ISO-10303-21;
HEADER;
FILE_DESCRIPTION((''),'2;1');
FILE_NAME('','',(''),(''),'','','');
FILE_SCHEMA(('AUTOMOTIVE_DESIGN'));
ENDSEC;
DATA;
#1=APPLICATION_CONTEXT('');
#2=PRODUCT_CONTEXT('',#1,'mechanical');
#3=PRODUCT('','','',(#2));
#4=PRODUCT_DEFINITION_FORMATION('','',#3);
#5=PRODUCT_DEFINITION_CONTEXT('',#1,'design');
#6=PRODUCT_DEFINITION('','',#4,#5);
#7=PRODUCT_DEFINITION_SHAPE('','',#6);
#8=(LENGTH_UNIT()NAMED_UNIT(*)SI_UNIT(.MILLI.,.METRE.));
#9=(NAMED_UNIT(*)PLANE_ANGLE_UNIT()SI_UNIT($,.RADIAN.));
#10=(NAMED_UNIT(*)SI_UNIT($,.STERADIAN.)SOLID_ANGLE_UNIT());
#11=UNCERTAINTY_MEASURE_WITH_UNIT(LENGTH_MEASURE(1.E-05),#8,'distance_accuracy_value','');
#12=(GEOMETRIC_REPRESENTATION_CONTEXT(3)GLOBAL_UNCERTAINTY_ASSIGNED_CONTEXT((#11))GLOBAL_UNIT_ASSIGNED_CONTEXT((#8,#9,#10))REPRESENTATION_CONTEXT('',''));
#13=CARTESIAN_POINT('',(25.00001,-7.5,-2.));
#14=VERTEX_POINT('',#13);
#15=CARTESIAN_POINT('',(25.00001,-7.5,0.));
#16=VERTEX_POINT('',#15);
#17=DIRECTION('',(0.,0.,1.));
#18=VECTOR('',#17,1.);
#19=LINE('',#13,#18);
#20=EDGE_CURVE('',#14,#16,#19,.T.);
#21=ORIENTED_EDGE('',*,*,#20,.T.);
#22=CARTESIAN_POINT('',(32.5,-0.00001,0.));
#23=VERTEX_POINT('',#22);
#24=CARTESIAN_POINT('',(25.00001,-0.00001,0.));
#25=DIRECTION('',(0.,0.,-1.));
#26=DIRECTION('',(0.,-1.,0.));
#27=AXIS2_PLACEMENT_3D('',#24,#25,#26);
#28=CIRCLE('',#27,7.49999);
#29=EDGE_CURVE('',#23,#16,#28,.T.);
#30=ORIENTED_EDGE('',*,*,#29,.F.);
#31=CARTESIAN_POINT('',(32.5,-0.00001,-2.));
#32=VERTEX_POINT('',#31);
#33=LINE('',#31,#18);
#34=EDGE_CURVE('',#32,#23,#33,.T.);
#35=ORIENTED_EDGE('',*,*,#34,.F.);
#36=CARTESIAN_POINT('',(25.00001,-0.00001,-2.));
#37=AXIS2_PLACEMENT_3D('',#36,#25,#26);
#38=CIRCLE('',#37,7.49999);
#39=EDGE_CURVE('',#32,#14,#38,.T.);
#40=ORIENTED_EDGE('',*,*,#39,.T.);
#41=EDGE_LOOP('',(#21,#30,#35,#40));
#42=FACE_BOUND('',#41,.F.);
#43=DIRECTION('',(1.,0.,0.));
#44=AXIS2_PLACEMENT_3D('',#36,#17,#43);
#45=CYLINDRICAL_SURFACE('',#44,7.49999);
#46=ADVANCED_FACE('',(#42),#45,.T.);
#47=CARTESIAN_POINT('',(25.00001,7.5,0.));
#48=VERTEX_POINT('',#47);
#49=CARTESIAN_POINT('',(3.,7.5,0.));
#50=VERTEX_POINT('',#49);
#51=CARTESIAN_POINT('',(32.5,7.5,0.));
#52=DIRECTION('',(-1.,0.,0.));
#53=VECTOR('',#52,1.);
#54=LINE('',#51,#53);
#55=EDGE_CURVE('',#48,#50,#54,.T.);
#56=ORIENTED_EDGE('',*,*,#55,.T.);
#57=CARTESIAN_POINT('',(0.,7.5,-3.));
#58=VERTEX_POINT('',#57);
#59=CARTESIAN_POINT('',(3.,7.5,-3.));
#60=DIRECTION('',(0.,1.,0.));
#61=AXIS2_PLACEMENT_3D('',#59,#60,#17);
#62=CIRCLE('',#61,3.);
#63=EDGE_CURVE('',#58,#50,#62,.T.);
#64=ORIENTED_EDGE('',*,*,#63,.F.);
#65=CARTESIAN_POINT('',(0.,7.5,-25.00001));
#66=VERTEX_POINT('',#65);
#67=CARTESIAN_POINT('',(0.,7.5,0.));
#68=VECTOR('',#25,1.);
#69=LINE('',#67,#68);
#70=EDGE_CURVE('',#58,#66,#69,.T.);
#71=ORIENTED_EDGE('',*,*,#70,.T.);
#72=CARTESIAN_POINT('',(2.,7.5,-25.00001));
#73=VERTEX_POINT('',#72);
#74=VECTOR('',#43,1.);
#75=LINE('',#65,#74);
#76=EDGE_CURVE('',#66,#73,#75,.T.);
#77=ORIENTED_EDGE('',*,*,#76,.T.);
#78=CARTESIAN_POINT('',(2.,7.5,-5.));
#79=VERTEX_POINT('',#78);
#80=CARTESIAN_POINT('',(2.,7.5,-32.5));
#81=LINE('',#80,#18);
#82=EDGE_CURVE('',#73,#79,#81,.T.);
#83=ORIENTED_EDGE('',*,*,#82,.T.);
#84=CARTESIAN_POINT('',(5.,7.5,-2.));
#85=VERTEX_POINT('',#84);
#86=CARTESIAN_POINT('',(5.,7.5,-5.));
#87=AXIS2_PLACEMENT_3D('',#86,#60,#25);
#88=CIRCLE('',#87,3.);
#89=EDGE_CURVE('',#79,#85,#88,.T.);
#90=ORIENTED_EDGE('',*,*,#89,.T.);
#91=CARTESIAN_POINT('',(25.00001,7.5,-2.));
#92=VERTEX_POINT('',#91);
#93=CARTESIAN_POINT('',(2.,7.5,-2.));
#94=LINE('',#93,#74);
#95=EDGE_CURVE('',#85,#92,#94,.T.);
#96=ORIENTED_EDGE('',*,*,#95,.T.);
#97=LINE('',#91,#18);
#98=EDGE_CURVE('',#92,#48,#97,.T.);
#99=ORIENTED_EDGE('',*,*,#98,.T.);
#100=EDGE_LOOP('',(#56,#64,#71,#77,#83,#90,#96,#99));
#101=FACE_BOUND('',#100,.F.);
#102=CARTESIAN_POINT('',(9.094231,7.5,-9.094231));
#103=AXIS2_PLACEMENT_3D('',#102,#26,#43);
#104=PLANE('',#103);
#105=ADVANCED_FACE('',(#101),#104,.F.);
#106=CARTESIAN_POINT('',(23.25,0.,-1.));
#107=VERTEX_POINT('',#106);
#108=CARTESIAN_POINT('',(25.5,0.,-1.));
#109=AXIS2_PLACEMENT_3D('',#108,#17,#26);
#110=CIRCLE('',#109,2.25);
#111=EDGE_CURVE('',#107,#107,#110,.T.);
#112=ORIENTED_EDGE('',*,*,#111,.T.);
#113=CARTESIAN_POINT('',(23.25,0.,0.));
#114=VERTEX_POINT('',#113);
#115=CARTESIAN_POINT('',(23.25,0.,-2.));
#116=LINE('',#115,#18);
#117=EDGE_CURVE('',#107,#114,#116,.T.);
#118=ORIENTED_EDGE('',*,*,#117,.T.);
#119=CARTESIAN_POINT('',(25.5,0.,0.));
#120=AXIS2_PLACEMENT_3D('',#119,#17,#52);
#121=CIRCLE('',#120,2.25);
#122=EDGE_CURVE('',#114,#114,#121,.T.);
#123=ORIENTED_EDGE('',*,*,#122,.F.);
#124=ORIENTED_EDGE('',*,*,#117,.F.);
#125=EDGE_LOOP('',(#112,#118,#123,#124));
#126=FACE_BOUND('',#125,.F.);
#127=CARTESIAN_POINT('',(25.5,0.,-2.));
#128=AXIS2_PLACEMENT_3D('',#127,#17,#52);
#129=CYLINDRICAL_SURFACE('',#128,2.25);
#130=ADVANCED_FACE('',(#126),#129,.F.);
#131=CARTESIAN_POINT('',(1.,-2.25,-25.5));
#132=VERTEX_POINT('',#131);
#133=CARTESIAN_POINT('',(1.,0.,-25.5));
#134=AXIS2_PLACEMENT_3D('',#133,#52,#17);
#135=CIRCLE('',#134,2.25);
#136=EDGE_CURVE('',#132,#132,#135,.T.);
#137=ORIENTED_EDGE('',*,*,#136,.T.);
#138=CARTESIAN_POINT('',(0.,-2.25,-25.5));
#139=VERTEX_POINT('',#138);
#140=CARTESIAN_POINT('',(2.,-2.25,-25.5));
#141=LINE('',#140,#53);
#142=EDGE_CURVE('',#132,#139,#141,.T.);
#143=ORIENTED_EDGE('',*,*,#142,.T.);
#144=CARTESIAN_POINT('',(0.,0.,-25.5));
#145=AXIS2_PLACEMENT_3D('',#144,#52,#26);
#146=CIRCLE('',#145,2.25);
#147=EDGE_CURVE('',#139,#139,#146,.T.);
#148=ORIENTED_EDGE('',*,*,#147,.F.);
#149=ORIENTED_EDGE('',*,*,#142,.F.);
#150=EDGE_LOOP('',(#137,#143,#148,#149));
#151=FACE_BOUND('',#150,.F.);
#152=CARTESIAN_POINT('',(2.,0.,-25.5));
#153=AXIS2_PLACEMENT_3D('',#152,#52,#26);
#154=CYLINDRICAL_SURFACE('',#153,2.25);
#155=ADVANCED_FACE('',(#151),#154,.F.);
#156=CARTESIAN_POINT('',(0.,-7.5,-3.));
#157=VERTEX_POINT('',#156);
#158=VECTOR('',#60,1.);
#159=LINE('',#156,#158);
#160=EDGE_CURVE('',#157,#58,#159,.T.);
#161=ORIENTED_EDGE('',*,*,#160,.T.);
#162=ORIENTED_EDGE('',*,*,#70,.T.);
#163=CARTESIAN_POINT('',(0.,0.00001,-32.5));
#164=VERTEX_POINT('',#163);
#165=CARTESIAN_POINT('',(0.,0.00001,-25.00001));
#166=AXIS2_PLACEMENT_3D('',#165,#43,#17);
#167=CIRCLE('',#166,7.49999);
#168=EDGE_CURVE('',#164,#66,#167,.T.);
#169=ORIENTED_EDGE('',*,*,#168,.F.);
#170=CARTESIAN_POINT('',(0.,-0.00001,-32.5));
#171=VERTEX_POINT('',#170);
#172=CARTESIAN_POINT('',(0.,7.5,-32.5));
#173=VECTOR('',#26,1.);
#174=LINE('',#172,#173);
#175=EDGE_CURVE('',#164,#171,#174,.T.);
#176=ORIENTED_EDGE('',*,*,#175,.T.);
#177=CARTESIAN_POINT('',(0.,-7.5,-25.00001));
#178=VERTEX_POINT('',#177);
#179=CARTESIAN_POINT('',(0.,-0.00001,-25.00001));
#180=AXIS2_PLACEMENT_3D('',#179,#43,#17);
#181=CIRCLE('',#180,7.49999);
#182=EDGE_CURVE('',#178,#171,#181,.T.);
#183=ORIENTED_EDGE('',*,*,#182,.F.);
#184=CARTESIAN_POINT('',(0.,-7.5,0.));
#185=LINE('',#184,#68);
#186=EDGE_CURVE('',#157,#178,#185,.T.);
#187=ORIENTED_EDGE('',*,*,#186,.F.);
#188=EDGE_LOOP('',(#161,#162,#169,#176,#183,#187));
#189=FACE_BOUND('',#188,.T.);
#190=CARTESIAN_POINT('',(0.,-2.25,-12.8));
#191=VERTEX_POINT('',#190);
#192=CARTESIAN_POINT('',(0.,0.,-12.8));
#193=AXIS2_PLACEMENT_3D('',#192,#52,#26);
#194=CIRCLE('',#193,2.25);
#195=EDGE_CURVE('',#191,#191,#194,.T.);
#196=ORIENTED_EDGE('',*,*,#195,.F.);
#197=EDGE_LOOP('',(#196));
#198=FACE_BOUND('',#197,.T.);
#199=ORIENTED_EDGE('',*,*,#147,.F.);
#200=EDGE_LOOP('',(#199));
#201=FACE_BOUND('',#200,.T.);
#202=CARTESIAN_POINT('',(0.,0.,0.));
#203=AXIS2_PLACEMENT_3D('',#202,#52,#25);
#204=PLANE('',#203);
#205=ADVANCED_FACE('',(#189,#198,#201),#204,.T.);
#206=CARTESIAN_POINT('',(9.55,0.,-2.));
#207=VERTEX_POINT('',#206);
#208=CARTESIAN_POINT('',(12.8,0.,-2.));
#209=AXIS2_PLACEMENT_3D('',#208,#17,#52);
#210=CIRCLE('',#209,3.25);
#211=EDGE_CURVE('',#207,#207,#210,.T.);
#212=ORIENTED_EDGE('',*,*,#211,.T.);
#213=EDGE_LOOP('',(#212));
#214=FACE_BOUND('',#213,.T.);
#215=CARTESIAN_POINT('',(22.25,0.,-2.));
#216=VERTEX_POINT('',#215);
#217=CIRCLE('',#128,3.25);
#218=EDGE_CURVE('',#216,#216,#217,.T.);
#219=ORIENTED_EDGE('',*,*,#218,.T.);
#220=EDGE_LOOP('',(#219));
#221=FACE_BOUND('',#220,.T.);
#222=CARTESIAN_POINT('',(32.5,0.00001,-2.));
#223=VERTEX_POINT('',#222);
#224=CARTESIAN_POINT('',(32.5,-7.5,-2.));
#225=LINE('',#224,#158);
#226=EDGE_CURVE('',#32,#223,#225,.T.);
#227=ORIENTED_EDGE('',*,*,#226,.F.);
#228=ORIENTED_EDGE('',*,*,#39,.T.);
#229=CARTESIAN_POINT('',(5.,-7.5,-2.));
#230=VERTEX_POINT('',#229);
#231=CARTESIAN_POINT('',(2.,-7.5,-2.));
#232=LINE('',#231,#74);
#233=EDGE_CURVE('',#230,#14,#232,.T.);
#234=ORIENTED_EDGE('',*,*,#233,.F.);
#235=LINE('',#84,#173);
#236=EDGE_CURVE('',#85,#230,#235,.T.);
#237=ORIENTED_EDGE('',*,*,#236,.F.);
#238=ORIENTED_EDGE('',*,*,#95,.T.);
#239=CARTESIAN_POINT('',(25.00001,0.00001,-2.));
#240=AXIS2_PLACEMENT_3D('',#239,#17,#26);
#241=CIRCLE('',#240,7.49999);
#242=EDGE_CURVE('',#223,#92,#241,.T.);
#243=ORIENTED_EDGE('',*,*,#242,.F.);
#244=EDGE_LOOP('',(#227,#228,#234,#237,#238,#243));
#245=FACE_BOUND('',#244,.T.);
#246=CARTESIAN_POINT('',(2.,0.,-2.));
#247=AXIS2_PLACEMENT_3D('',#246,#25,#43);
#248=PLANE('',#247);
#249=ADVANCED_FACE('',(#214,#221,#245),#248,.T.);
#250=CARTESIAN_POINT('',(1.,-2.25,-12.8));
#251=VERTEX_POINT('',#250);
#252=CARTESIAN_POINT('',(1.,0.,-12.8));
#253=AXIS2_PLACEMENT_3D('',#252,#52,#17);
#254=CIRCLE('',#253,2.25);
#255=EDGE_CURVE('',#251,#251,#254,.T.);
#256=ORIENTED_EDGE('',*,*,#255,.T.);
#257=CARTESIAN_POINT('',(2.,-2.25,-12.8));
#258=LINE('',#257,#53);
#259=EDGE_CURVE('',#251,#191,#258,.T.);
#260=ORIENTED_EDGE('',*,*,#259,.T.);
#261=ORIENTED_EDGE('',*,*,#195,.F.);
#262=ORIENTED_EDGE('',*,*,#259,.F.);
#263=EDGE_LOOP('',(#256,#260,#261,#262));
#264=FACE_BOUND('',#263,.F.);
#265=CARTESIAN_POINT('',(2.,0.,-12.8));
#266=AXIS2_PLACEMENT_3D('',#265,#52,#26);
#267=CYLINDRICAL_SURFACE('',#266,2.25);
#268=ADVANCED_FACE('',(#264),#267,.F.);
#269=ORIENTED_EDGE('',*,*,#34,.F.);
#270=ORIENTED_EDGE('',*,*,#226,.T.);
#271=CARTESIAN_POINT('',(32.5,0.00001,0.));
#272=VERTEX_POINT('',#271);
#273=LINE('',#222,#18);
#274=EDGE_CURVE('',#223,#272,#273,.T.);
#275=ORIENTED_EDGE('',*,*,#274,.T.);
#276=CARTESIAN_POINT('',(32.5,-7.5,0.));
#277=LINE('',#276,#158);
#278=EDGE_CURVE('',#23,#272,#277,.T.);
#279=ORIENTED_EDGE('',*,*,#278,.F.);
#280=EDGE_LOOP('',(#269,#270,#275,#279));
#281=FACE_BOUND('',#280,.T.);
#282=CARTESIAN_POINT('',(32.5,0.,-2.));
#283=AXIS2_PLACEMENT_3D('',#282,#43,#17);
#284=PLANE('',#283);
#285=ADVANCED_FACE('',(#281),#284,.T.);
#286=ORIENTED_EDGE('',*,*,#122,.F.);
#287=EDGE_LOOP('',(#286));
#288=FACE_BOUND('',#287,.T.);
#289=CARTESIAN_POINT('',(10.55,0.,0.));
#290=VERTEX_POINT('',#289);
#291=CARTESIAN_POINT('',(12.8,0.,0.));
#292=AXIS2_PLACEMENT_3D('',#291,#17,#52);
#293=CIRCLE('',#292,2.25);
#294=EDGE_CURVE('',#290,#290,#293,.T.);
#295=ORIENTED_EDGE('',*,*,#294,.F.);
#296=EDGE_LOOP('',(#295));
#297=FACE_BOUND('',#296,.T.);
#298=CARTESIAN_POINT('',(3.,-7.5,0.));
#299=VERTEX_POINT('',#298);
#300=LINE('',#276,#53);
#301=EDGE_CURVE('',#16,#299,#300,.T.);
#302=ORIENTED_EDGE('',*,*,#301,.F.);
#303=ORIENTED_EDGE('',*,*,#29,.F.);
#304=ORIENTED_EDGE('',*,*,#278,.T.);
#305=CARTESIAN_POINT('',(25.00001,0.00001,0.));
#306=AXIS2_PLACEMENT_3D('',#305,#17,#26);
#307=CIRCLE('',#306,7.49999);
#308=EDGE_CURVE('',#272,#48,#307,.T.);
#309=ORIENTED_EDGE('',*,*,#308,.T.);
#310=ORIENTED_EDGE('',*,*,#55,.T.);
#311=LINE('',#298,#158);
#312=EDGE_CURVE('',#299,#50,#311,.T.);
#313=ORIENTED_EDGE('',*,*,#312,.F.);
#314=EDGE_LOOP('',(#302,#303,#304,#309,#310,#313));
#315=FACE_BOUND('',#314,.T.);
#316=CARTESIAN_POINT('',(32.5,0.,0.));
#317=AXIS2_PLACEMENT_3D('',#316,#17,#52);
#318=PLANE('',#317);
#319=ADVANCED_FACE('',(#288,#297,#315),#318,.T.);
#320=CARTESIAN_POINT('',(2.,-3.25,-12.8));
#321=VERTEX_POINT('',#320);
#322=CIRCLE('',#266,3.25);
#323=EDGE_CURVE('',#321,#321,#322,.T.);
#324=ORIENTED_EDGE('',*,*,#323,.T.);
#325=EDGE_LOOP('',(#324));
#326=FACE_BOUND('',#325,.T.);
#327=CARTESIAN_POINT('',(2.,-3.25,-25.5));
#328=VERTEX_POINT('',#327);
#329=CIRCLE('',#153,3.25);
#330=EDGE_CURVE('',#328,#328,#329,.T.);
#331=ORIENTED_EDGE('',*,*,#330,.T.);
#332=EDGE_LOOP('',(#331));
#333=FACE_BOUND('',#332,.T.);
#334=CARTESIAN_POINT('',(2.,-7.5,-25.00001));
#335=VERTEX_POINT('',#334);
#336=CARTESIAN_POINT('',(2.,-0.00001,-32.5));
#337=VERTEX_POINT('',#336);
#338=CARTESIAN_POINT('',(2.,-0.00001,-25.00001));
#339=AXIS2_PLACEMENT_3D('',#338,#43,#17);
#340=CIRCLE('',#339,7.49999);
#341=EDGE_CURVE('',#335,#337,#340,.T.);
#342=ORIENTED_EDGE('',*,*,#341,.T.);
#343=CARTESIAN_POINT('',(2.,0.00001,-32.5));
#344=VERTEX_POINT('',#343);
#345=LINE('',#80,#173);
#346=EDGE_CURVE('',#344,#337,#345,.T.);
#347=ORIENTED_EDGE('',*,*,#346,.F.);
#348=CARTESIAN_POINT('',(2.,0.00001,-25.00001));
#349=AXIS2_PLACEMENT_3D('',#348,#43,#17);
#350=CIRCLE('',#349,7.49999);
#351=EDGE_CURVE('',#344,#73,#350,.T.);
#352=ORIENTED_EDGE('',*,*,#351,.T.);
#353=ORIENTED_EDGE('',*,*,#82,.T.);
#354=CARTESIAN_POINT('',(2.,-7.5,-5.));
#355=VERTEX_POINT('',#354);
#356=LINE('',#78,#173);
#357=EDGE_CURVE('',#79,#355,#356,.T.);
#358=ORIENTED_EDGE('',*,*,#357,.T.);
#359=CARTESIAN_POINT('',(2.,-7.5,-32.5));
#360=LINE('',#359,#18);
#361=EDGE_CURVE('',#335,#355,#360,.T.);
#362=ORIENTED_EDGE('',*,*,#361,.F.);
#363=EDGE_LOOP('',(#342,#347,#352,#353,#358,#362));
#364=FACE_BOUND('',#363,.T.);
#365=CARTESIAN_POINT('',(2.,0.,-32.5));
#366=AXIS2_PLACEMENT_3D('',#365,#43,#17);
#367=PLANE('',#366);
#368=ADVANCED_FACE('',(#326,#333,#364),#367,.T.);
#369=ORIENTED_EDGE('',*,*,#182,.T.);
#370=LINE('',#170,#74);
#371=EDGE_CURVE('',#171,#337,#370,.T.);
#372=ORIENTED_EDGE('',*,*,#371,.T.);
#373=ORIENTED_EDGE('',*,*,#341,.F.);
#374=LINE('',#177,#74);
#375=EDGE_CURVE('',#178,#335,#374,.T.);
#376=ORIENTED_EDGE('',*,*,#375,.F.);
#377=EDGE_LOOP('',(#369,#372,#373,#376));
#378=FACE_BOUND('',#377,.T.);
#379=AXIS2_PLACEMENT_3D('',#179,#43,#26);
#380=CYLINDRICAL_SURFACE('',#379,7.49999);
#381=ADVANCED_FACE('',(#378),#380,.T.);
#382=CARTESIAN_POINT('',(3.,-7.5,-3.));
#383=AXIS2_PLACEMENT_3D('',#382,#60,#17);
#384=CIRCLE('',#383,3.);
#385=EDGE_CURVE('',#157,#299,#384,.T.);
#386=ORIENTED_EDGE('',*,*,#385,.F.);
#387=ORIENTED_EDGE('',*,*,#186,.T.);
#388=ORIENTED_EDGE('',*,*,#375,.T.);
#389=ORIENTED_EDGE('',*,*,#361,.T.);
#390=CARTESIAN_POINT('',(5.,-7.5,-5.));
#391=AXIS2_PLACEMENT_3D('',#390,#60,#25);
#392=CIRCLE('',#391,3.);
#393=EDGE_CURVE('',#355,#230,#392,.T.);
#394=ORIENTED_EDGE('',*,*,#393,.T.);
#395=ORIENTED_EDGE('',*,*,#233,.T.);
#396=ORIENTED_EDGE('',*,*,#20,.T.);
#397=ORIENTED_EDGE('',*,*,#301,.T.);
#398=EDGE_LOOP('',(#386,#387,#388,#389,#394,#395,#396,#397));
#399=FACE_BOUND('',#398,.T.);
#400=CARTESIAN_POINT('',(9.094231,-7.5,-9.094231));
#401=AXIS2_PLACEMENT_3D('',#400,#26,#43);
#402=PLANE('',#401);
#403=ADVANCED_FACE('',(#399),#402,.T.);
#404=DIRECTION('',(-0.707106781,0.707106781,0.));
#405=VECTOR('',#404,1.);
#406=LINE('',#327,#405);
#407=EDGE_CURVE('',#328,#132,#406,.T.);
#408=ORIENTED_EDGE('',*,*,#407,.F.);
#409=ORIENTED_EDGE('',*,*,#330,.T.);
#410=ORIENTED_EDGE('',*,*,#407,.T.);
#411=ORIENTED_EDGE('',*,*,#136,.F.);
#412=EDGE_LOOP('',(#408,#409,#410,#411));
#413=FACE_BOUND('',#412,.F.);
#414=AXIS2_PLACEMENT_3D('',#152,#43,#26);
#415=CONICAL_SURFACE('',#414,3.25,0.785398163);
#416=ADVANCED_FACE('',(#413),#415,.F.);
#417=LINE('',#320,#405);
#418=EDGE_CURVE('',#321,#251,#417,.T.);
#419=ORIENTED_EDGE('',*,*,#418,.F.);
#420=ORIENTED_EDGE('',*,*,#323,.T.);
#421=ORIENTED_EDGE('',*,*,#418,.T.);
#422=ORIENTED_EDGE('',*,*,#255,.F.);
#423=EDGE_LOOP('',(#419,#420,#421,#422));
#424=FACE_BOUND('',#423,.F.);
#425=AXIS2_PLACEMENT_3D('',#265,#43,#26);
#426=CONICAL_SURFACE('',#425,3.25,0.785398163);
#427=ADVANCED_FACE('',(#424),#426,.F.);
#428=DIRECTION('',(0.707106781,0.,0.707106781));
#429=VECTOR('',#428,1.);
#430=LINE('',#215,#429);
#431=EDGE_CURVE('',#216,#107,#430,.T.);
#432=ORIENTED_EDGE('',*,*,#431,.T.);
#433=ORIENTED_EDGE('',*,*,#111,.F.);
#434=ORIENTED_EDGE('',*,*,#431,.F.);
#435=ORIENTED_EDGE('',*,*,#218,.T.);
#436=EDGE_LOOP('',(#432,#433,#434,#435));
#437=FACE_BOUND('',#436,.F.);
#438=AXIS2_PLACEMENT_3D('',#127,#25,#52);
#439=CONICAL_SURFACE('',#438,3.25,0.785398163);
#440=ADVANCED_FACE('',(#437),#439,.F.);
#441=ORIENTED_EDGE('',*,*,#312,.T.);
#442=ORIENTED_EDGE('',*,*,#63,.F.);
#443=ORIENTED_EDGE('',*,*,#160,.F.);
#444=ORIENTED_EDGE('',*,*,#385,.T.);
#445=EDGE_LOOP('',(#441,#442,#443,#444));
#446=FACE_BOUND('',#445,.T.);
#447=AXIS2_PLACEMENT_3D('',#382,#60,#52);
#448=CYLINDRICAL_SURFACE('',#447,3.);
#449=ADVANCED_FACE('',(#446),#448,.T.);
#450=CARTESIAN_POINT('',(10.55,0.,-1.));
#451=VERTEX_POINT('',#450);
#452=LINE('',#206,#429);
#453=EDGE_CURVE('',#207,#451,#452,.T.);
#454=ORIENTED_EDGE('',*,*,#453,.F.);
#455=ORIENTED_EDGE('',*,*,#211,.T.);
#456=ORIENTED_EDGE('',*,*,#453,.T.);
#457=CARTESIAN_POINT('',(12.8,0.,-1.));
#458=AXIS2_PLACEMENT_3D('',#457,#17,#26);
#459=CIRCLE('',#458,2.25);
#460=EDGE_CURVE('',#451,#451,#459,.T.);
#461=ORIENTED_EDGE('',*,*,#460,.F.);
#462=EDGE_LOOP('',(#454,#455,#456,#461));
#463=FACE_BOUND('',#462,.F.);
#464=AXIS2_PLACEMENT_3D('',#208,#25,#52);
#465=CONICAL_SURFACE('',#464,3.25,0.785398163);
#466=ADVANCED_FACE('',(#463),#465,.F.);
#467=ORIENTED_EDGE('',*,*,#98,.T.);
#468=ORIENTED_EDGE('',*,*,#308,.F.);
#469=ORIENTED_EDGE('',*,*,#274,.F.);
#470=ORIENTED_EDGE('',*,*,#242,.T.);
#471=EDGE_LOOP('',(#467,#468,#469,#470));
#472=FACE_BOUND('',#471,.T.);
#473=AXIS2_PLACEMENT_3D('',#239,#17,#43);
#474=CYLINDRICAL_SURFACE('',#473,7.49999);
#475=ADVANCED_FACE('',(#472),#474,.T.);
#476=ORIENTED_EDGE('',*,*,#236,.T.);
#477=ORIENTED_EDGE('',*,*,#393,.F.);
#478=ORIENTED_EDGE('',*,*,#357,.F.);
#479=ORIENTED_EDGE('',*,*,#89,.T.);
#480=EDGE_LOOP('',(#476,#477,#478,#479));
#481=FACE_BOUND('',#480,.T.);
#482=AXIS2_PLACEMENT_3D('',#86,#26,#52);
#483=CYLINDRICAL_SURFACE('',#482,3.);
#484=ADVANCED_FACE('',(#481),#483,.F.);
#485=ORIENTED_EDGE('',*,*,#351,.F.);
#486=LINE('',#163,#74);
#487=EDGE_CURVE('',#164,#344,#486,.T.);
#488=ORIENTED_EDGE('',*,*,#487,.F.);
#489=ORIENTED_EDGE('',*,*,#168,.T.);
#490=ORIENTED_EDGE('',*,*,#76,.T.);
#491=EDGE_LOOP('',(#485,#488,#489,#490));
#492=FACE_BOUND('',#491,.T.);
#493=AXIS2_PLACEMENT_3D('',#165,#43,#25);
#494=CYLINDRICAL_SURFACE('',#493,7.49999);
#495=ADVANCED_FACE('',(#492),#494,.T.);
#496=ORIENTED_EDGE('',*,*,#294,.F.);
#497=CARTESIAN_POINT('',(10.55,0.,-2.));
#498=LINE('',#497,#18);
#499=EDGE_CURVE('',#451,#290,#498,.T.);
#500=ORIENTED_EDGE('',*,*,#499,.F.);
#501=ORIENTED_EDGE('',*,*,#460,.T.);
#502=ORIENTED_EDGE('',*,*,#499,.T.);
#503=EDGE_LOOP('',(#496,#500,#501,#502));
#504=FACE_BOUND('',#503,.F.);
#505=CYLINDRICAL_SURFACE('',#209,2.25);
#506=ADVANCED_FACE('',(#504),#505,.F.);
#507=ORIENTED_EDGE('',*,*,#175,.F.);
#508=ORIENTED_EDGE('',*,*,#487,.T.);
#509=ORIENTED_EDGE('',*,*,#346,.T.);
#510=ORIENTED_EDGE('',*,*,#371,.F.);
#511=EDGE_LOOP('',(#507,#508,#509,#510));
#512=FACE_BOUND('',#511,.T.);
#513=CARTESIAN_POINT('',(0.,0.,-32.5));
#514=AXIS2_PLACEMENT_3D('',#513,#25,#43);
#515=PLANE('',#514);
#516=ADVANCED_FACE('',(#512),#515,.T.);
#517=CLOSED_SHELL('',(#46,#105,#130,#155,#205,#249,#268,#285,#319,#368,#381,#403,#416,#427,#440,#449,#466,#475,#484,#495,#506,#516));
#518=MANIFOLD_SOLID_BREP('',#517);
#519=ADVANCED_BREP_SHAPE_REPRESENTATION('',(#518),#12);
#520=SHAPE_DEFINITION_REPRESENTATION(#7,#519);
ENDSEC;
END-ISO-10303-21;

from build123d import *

# Parameters (mm, degrees)
F1_DEPTH             = 7.5
F2_R                 = 7.49999
F3_R                 = 3
F6_D                 = 4.5
F6_CSINK_D           = 6.5
F6_CSINK_ANGLE       = 90
F6_ON_F5_D           = 4.5
F6_ON_F5_CSINK_D     = 6.5
F6_ON_F5_CSINK_ANGLE = 90


# Not quite as in the source:
# - a fillet or chamfer is up to 0.001 mm smaller than in the source, because OpenCascade refuses the exact size


with BuildPart() as f1:
    # F0 (on Front) → F1 (new body, symmetric)
    with BuildSketch(Plane.XZ):
        Polygon((0, 0), (0, -32.5), (2, -32.5), (2, -2), (32.5, -2), (32.5, 0), align=None)
    extrude(amount=F1_DEPTH, both=True)

    # F2 (radius 7.5 in the source; OpenCascade refuses exactly that, so slightly less here)
    f2_edges = [f1.edges().sort_by_distance(p)[0] for p in [
        (32.5, -7.5, -1),
        (32.5, 7.5, -1),
        (1, -7.5, -32.5),
        (1, 7.5, -32.5),
    ]]
    fillet(f2_edges, radius=F2_R)

    # F3
    f3_edges = [f1.edges().sort_by_distance(p)[0] for p in [
        (2, 0, -2),
        (0, 0, 0),
    ]]
    fillet(f3_edges, radius=F3_R)

    # F6 (through all)
    with Locations(Plane(origin=(0, 0, -2), x_dir=(1, 0, 0), z_dir=(0, 0, -1))):
        with Locations((12.8, 0), (25.5, 0)):
            CounterSinkHole(F6_D / 2, F6_CSINK_D / 2, counter_sink_angle=F6_CSINK_ANGLE)

    # F6 on F5 (through all)
    with Locations(Plane.YZ.offset(2)):
        with Locations((0, -25.5), (0, -12.8)):
            CounterSinkHole(F6_ON_F5_D / 2, F6_ON_F5_CSINK_D / 2, counter_sink_angle=F6_ON_F5_CSINK_ANGLE)


solid = f1.part
